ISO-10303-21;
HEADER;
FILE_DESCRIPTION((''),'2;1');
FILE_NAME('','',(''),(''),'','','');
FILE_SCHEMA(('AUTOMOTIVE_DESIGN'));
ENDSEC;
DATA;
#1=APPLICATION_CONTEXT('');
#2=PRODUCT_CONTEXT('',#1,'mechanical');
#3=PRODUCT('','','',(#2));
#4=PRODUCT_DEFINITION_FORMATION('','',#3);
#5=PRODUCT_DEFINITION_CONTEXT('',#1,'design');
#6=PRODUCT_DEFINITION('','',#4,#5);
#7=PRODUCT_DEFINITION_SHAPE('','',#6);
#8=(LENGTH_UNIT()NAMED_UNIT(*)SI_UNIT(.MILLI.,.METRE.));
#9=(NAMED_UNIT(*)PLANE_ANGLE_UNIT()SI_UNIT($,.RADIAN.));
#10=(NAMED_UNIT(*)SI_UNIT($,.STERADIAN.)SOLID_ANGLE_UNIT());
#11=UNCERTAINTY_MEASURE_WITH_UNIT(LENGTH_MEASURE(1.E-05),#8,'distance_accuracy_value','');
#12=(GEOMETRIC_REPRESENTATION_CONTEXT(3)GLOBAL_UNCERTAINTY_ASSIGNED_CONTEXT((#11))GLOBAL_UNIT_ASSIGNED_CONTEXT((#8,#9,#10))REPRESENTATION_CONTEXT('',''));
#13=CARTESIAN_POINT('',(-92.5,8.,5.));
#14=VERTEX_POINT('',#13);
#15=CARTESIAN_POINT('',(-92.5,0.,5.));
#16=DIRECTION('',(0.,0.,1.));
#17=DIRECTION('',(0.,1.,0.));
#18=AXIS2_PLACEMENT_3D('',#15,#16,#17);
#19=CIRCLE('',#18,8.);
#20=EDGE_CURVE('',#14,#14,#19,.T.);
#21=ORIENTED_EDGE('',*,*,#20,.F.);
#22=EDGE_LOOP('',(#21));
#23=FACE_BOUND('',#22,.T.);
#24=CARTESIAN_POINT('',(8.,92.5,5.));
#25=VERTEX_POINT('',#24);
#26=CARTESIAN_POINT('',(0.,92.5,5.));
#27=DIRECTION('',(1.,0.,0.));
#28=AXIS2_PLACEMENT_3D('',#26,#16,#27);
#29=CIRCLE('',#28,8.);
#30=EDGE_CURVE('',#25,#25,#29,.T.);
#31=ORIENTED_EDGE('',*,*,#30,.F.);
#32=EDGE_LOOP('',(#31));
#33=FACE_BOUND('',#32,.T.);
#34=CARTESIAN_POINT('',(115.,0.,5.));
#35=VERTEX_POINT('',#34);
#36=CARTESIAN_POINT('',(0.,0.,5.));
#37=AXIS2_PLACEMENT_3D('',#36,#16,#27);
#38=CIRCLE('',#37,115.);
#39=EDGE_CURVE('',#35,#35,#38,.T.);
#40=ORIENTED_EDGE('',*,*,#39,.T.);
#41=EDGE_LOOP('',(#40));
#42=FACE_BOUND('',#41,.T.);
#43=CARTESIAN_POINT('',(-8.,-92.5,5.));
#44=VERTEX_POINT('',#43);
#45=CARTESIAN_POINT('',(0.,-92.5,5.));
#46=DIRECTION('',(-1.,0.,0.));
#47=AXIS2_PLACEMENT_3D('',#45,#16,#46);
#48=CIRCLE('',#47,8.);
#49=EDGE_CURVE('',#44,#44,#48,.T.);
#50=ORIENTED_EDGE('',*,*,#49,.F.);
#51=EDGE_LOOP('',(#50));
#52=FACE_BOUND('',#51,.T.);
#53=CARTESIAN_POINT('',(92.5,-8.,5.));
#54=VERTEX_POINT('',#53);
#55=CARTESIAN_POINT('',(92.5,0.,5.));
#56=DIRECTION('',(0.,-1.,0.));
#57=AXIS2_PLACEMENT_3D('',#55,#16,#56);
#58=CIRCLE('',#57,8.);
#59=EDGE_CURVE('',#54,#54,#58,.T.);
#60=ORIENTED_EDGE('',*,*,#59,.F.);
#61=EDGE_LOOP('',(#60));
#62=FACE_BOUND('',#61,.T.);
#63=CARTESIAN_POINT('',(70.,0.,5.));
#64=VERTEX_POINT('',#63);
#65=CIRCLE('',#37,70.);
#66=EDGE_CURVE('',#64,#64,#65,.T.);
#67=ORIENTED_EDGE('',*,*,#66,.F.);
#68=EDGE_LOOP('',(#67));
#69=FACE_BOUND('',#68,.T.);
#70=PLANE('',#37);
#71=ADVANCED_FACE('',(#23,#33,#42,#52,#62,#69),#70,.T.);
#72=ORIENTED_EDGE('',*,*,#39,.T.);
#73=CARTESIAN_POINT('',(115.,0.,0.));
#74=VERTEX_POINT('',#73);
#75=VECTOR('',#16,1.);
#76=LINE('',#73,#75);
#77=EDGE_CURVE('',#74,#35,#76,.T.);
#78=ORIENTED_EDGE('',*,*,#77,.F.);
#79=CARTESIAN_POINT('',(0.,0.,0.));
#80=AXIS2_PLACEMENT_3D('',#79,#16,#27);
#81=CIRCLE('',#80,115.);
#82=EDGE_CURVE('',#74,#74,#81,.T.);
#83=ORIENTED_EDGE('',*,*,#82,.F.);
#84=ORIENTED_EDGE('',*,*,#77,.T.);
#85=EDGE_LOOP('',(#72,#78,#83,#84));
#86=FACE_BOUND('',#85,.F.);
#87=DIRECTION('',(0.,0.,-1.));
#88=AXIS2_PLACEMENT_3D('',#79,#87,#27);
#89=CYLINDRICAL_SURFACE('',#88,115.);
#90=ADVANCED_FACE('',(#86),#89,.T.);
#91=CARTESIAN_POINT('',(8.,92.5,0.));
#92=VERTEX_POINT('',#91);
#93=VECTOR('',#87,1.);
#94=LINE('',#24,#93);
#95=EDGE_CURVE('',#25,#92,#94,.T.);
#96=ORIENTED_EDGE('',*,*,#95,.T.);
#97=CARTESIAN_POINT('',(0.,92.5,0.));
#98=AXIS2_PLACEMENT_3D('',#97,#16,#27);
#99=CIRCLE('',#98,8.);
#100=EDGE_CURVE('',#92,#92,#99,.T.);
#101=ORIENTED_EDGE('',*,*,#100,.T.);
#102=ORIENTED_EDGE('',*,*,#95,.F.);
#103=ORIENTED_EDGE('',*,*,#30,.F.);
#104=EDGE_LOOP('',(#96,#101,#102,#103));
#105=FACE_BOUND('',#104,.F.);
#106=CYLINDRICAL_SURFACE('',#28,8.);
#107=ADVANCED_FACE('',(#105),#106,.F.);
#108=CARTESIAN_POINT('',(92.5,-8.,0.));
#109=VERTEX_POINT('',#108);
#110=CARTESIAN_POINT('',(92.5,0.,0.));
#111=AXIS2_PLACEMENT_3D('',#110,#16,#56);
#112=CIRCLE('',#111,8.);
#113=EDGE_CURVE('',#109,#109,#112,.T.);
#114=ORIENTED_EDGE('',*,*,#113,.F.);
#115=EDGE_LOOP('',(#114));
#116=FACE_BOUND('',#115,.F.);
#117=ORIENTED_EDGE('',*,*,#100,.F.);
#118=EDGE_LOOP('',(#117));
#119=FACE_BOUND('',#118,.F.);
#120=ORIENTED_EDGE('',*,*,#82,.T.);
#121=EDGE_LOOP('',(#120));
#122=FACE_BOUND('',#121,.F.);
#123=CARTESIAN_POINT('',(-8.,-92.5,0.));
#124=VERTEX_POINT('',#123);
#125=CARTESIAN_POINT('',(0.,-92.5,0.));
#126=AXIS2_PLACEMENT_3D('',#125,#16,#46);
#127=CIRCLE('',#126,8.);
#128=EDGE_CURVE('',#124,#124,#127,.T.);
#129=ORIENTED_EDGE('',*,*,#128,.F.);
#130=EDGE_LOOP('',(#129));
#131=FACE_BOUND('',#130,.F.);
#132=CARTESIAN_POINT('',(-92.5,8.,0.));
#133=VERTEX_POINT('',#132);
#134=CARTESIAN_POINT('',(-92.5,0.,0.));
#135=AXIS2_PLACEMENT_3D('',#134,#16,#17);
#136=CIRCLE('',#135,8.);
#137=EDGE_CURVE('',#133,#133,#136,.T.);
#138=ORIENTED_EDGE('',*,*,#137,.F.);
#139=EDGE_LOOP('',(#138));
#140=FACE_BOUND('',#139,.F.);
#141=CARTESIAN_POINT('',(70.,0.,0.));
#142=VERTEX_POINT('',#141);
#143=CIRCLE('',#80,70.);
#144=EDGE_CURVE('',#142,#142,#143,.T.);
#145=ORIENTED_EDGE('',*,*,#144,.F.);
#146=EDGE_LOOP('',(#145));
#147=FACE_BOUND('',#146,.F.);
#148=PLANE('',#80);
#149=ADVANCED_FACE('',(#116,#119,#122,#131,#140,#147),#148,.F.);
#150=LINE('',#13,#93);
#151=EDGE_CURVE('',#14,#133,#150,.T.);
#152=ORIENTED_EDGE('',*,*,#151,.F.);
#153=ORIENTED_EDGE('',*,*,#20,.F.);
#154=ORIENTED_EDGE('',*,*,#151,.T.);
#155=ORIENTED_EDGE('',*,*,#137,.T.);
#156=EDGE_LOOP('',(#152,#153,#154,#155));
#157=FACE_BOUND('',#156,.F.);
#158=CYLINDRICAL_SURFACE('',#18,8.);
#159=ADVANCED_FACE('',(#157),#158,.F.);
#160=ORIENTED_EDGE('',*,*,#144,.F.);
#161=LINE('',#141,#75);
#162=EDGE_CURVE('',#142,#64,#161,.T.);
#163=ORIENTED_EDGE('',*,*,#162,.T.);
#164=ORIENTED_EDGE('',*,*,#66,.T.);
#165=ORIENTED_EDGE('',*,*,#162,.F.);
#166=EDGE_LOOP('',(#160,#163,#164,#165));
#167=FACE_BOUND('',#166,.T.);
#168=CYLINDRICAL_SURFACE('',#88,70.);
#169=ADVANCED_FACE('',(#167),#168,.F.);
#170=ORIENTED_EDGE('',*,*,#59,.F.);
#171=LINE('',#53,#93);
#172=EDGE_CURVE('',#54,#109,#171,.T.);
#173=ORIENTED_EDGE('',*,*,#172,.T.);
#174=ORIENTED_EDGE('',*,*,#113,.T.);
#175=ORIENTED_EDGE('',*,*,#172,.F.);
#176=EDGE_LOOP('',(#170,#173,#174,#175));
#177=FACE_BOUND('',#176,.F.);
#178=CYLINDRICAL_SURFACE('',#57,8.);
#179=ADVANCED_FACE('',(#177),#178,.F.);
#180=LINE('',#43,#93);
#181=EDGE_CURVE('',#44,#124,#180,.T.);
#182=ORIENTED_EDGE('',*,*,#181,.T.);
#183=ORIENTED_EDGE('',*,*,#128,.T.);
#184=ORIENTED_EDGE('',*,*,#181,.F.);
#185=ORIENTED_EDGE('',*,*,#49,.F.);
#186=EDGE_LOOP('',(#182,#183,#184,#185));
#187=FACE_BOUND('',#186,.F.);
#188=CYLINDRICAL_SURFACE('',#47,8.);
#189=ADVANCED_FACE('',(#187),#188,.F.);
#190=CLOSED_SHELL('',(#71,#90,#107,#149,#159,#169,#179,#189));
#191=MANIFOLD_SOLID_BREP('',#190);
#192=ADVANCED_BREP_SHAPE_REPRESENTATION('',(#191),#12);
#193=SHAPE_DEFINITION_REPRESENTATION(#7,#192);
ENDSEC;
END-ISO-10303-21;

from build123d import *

# Parameters (mm, degrees)
F0_R            = 115
F0_R_2          = 70
F1_DEPTH        = 5
F2_R            = 8
F3_DEPTH        = 25
F3_COPIES_COUNT = 4


# Not quite as in the source:
# - a pattern or mirror of a feature is missing from the dataset's text; its kind, count and spacing are read off the source's solid


with BuildPart() as f1:
    # F0 (on Top) → F1 (new body)
    with BuildSketch(Plane.XY):
        Circle(F0_R)
        Circle(F0_R_2, mode=Mode.SUBTRACT)
    extrude(amount=F1_DEPTH)

    # F2 (on face) → F3 (cut)
    with BuildSketch(Plane.XY.offset(5)):
        with Locations((0, 92.5)):
            Circle(F2_R)
    f3 = extrude(amount=-F3_DEPTH, mode=Mode.SUBTRACT)

    # F3_copies: F3 ×4 about axis
    f3_copies_axis = Axis((0, 0, 0), (0, 0, 1))
    for i in range(1, F3_COPIES_COUNT):
        add(f3.rotate(f3_copies_axis, i * 360 / F3_COPIES_COUNT), mode=Mode.SUBTRACT)


solid = f1.part
